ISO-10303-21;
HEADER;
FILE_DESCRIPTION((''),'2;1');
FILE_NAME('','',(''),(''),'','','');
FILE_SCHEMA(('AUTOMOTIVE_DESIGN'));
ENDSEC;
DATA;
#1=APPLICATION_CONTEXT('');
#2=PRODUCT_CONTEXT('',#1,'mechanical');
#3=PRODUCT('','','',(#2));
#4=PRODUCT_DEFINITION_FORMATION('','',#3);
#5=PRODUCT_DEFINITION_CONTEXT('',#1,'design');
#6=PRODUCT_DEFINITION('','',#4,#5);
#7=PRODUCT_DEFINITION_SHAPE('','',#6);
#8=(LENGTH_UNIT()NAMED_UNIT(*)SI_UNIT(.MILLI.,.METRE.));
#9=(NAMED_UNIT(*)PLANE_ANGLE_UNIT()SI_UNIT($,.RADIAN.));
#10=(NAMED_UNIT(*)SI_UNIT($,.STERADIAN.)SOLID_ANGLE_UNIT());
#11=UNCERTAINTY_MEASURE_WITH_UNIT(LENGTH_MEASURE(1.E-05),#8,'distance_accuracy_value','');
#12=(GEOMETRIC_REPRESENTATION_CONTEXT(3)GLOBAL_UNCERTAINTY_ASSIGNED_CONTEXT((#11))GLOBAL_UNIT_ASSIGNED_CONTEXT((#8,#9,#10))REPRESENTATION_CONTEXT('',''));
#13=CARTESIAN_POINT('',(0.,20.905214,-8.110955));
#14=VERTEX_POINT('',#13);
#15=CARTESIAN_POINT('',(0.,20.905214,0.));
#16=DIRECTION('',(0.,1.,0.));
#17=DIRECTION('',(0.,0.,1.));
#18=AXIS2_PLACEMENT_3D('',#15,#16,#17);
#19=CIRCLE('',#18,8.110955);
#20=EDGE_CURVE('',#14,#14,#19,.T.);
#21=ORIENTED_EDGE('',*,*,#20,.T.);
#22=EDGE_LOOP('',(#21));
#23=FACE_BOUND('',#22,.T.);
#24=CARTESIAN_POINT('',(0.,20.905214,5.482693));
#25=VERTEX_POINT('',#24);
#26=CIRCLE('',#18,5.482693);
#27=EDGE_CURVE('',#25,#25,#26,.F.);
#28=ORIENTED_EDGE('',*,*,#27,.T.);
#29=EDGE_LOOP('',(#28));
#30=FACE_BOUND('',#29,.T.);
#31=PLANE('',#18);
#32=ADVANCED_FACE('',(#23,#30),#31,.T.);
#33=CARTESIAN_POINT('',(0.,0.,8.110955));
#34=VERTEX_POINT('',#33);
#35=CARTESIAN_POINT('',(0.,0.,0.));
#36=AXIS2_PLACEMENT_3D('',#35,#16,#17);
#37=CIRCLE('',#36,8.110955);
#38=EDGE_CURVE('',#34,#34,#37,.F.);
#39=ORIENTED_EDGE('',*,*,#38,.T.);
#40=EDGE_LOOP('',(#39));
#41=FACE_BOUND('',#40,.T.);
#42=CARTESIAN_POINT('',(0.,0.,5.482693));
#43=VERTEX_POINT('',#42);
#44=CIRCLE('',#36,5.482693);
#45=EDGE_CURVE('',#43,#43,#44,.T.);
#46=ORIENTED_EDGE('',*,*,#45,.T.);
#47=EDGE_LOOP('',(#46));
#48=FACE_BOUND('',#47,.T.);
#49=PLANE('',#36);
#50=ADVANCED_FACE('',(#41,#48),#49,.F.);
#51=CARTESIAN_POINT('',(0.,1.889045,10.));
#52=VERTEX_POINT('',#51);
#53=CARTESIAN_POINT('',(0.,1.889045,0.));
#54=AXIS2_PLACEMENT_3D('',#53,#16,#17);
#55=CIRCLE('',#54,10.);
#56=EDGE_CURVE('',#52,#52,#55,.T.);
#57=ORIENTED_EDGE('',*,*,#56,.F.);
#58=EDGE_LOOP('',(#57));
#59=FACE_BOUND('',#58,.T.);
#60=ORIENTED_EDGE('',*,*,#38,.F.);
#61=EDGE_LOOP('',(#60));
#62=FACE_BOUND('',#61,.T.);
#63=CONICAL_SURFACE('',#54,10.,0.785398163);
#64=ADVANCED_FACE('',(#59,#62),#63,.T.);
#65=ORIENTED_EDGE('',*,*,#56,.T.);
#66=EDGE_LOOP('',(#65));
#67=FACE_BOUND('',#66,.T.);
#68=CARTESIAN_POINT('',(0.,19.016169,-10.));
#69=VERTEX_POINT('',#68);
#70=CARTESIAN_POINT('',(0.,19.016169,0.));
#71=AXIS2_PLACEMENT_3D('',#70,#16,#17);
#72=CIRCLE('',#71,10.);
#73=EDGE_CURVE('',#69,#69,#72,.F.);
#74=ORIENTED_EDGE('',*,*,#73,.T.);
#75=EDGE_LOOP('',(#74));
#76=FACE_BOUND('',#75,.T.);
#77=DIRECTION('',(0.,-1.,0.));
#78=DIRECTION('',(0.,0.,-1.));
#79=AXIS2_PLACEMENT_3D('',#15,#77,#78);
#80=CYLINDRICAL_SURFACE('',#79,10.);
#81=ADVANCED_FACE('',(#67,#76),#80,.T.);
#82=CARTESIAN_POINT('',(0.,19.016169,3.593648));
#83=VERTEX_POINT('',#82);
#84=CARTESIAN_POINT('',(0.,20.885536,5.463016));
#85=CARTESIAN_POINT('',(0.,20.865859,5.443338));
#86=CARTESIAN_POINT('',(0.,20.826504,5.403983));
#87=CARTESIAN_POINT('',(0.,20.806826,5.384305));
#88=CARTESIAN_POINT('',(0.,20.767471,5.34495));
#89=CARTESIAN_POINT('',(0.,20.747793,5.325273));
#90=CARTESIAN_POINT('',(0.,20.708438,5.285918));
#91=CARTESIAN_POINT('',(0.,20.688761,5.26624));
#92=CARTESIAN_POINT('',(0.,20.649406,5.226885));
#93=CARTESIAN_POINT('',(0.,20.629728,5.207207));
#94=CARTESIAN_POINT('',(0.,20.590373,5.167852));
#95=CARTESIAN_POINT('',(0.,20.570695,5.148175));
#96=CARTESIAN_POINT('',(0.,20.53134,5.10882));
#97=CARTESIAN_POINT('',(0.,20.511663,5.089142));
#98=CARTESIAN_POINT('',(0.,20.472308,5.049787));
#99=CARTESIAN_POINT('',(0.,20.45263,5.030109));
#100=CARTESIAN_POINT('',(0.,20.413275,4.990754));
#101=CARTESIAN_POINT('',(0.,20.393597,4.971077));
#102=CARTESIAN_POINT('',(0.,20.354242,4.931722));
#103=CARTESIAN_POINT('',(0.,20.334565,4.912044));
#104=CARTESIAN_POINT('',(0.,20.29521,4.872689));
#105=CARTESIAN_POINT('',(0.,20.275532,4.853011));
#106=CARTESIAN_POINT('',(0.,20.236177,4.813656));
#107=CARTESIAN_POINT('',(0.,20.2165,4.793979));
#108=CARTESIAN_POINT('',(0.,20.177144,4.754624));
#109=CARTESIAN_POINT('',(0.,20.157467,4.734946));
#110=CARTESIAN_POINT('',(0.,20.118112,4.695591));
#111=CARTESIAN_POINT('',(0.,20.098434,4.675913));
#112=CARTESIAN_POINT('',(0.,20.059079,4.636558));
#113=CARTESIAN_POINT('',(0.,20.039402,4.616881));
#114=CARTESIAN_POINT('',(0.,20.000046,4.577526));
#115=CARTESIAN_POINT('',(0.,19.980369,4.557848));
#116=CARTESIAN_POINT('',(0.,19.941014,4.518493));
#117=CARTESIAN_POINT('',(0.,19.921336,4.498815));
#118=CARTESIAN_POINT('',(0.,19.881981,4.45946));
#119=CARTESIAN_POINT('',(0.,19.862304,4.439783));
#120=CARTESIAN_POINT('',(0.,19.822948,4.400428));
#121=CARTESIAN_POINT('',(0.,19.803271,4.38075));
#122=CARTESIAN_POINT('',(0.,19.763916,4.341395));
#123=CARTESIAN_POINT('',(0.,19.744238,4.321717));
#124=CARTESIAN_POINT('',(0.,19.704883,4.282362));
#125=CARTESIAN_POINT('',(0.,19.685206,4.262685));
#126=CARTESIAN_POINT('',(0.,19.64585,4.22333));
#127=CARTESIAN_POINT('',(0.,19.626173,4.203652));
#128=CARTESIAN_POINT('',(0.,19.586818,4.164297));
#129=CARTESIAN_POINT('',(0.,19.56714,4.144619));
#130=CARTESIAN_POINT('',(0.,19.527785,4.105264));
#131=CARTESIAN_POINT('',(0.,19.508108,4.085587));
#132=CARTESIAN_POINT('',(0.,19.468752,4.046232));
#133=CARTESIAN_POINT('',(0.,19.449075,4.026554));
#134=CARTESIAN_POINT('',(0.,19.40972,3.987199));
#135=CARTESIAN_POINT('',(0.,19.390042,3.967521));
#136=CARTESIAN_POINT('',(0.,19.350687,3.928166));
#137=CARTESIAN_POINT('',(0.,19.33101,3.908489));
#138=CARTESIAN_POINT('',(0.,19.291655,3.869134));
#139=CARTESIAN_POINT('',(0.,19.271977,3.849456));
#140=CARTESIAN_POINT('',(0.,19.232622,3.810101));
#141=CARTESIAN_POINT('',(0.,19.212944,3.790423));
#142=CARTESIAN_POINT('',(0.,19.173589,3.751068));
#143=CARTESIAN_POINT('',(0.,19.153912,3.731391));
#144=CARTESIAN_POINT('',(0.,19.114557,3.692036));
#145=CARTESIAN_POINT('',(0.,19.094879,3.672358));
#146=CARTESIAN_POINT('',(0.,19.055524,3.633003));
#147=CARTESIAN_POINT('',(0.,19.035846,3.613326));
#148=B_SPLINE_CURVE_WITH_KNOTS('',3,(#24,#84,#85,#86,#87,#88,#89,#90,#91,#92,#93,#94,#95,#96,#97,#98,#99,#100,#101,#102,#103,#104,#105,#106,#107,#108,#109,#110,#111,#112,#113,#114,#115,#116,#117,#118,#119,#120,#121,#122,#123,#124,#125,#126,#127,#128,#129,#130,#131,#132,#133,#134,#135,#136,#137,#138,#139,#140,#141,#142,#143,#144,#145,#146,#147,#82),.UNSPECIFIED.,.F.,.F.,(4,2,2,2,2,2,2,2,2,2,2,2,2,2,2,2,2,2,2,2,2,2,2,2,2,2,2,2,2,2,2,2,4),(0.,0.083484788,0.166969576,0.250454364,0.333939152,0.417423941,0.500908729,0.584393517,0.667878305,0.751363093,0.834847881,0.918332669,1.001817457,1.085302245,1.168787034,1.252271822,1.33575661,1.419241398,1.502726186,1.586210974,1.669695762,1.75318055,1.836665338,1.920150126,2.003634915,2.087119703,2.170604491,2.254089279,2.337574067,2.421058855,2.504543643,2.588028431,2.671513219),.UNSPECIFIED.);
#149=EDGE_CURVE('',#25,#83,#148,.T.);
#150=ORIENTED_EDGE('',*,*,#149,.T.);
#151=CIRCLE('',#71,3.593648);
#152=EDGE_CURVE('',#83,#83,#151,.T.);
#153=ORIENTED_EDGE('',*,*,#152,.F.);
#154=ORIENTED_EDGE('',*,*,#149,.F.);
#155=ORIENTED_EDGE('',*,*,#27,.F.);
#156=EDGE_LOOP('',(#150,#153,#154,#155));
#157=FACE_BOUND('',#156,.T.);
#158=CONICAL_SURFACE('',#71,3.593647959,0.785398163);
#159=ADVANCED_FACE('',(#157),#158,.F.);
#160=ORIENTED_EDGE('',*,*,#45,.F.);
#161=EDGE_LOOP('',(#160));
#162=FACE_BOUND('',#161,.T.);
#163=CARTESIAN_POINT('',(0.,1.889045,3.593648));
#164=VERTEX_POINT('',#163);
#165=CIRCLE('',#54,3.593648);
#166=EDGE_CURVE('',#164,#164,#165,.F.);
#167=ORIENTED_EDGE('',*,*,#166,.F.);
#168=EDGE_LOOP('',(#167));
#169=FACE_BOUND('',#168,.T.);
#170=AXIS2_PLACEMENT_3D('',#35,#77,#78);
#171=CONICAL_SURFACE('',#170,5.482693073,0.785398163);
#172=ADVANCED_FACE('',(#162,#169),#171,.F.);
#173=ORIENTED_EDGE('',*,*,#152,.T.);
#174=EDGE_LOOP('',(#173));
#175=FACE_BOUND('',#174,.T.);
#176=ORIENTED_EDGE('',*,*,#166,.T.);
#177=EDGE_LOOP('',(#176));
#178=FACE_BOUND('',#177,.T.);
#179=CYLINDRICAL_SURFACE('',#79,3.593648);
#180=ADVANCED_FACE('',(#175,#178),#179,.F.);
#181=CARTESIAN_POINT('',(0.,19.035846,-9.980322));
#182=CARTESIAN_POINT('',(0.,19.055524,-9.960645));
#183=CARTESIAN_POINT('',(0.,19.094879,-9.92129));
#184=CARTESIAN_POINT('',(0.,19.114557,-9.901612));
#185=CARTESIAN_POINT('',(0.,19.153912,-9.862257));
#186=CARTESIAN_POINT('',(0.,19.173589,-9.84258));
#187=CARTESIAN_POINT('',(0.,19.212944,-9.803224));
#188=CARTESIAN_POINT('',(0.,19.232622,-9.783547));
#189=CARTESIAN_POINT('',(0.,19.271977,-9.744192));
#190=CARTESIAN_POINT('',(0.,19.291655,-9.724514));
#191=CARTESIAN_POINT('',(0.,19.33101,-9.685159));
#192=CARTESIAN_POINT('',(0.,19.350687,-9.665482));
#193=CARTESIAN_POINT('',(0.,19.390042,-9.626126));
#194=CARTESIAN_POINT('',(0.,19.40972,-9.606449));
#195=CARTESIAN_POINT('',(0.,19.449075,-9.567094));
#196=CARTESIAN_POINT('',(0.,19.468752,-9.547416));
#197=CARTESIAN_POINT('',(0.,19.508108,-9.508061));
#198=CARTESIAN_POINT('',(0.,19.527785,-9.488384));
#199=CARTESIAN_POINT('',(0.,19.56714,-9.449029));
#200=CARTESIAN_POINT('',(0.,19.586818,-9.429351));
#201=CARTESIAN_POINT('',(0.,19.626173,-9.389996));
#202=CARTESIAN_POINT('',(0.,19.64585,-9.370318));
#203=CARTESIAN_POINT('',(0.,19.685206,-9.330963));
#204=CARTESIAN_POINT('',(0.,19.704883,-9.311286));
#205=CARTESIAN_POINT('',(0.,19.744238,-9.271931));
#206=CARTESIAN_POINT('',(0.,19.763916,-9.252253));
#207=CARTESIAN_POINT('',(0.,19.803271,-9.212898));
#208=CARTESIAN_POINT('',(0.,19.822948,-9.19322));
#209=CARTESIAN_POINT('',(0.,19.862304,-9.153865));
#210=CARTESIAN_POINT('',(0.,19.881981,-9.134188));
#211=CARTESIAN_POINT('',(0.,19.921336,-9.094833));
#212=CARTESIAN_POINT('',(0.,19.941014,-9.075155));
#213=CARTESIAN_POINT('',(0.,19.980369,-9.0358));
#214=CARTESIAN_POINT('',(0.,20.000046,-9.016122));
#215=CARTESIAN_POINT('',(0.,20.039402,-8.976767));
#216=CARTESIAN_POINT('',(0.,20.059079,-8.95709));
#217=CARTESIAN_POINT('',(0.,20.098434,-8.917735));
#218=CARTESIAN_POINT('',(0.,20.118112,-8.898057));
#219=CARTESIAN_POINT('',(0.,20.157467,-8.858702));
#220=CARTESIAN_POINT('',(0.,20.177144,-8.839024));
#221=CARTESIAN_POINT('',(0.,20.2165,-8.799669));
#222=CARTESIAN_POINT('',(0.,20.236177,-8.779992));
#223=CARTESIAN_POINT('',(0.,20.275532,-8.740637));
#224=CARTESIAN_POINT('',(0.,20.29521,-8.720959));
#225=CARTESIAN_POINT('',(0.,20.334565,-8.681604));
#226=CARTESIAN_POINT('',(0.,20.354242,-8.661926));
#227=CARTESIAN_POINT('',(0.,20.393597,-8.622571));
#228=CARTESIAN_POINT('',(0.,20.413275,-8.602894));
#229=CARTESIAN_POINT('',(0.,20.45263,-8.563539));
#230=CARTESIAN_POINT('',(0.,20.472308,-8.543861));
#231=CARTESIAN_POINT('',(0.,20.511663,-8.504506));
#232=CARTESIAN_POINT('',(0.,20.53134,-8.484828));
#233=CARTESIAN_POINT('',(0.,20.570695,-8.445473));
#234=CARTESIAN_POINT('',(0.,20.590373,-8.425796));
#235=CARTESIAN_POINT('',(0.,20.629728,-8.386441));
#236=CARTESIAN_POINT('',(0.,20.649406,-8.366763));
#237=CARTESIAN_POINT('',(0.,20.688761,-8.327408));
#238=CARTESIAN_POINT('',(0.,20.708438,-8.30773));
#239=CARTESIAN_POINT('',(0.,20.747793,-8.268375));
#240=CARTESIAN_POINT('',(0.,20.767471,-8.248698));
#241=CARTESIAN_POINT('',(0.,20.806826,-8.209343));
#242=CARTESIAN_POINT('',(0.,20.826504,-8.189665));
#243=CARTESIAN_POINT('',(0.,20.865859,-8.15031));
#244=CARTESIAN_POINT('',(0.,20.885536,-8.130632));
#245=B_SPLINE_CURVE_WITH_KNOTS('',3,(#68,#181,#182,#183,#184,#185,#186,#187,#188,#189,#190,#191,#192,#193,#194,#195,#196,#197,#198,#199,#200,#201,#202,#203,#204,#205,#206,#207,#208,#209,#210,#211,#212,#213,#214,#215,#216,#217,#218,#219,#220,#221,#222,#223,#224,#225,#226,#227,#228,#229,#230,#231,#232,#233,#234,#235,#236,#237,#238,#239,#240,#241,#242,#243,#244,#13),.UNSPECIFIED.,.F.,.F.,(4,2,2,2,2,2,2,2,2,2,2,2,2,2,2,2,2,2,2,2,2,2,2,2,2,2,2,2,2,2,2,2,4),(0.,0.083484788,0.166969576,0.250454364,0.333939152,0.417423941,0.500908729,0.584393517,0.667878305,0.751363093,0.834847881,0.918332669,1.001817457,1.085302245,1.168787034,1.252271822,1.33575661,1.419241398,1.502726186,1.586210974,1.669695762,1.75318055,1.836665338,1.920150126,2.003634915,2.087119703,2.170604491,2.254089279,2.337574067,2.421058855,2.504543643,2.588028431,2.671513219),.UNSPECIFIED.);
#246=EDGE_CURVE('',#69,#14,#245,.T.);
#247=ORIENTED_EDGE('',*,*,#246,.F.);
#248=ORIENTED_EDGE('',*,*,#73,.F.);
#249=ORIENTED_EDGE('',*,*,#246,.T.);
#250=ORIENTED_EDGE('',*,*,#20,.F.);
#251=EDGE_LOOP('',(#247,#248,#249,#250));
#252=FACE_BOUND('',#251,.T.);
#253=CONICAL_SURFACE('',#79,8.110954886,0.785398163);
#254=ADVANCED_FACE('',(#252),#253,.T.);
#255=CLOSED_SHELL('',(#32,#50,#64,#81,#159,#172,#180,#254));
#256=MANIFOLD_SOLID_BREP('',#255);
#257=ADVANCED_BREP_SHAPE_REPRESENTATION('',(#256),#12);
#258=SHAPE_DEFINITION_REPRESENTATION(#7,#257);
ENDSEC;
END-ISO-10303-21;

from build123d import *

# Parameters (mm, degrees)
SKETCH1_R           = 10
BOSS_EXTRUDE1_DEPTH = 20.905213876
SKETCH2_R           = 3.593647959
CUT_EXTRUDE1_DEPTH  = 26.239412972
CHAMFER1_SIZE       = 1.889045114


with BuildPart() as part:
    # Sketch1 → Boss-Extrude1 (new body)
    with BuildSketch(Plane(origin=(0, 0, 0), x_dir=(1, 0, 0), z_dir=(0, 1, 0))):
        Circle(SKETCH1_R)
    extrude(amount=BOSS_EXTRUDE1_DEPTH)

    # Sketch2 → Cut-Extrude1 (cut, through all)
    with BuildSketch(Plane(origin=(0, 0, 0), x_dir=(1, 0, 0), z_dir=(0, 1, 0))):
        Circle(SKETCH2_R)
    extrude(amount=CUT_EXTRUDE1_DEPTH, mode=Mode.SUBTRACT)

    # Chamfer1
    chamfer1_edges = [part.edges().sort_by_distance(p)[0] for p in [
        (-3.593647959, 20.905213876, 0),
        (-3.593647959, 0, 0),
        (-10, 0, 0),
        (-10, 20.905213876, 0),
    ]]
    chamfer(chamfer1_edges, length=CHAMFER1_SIZE)


solid = part.part
